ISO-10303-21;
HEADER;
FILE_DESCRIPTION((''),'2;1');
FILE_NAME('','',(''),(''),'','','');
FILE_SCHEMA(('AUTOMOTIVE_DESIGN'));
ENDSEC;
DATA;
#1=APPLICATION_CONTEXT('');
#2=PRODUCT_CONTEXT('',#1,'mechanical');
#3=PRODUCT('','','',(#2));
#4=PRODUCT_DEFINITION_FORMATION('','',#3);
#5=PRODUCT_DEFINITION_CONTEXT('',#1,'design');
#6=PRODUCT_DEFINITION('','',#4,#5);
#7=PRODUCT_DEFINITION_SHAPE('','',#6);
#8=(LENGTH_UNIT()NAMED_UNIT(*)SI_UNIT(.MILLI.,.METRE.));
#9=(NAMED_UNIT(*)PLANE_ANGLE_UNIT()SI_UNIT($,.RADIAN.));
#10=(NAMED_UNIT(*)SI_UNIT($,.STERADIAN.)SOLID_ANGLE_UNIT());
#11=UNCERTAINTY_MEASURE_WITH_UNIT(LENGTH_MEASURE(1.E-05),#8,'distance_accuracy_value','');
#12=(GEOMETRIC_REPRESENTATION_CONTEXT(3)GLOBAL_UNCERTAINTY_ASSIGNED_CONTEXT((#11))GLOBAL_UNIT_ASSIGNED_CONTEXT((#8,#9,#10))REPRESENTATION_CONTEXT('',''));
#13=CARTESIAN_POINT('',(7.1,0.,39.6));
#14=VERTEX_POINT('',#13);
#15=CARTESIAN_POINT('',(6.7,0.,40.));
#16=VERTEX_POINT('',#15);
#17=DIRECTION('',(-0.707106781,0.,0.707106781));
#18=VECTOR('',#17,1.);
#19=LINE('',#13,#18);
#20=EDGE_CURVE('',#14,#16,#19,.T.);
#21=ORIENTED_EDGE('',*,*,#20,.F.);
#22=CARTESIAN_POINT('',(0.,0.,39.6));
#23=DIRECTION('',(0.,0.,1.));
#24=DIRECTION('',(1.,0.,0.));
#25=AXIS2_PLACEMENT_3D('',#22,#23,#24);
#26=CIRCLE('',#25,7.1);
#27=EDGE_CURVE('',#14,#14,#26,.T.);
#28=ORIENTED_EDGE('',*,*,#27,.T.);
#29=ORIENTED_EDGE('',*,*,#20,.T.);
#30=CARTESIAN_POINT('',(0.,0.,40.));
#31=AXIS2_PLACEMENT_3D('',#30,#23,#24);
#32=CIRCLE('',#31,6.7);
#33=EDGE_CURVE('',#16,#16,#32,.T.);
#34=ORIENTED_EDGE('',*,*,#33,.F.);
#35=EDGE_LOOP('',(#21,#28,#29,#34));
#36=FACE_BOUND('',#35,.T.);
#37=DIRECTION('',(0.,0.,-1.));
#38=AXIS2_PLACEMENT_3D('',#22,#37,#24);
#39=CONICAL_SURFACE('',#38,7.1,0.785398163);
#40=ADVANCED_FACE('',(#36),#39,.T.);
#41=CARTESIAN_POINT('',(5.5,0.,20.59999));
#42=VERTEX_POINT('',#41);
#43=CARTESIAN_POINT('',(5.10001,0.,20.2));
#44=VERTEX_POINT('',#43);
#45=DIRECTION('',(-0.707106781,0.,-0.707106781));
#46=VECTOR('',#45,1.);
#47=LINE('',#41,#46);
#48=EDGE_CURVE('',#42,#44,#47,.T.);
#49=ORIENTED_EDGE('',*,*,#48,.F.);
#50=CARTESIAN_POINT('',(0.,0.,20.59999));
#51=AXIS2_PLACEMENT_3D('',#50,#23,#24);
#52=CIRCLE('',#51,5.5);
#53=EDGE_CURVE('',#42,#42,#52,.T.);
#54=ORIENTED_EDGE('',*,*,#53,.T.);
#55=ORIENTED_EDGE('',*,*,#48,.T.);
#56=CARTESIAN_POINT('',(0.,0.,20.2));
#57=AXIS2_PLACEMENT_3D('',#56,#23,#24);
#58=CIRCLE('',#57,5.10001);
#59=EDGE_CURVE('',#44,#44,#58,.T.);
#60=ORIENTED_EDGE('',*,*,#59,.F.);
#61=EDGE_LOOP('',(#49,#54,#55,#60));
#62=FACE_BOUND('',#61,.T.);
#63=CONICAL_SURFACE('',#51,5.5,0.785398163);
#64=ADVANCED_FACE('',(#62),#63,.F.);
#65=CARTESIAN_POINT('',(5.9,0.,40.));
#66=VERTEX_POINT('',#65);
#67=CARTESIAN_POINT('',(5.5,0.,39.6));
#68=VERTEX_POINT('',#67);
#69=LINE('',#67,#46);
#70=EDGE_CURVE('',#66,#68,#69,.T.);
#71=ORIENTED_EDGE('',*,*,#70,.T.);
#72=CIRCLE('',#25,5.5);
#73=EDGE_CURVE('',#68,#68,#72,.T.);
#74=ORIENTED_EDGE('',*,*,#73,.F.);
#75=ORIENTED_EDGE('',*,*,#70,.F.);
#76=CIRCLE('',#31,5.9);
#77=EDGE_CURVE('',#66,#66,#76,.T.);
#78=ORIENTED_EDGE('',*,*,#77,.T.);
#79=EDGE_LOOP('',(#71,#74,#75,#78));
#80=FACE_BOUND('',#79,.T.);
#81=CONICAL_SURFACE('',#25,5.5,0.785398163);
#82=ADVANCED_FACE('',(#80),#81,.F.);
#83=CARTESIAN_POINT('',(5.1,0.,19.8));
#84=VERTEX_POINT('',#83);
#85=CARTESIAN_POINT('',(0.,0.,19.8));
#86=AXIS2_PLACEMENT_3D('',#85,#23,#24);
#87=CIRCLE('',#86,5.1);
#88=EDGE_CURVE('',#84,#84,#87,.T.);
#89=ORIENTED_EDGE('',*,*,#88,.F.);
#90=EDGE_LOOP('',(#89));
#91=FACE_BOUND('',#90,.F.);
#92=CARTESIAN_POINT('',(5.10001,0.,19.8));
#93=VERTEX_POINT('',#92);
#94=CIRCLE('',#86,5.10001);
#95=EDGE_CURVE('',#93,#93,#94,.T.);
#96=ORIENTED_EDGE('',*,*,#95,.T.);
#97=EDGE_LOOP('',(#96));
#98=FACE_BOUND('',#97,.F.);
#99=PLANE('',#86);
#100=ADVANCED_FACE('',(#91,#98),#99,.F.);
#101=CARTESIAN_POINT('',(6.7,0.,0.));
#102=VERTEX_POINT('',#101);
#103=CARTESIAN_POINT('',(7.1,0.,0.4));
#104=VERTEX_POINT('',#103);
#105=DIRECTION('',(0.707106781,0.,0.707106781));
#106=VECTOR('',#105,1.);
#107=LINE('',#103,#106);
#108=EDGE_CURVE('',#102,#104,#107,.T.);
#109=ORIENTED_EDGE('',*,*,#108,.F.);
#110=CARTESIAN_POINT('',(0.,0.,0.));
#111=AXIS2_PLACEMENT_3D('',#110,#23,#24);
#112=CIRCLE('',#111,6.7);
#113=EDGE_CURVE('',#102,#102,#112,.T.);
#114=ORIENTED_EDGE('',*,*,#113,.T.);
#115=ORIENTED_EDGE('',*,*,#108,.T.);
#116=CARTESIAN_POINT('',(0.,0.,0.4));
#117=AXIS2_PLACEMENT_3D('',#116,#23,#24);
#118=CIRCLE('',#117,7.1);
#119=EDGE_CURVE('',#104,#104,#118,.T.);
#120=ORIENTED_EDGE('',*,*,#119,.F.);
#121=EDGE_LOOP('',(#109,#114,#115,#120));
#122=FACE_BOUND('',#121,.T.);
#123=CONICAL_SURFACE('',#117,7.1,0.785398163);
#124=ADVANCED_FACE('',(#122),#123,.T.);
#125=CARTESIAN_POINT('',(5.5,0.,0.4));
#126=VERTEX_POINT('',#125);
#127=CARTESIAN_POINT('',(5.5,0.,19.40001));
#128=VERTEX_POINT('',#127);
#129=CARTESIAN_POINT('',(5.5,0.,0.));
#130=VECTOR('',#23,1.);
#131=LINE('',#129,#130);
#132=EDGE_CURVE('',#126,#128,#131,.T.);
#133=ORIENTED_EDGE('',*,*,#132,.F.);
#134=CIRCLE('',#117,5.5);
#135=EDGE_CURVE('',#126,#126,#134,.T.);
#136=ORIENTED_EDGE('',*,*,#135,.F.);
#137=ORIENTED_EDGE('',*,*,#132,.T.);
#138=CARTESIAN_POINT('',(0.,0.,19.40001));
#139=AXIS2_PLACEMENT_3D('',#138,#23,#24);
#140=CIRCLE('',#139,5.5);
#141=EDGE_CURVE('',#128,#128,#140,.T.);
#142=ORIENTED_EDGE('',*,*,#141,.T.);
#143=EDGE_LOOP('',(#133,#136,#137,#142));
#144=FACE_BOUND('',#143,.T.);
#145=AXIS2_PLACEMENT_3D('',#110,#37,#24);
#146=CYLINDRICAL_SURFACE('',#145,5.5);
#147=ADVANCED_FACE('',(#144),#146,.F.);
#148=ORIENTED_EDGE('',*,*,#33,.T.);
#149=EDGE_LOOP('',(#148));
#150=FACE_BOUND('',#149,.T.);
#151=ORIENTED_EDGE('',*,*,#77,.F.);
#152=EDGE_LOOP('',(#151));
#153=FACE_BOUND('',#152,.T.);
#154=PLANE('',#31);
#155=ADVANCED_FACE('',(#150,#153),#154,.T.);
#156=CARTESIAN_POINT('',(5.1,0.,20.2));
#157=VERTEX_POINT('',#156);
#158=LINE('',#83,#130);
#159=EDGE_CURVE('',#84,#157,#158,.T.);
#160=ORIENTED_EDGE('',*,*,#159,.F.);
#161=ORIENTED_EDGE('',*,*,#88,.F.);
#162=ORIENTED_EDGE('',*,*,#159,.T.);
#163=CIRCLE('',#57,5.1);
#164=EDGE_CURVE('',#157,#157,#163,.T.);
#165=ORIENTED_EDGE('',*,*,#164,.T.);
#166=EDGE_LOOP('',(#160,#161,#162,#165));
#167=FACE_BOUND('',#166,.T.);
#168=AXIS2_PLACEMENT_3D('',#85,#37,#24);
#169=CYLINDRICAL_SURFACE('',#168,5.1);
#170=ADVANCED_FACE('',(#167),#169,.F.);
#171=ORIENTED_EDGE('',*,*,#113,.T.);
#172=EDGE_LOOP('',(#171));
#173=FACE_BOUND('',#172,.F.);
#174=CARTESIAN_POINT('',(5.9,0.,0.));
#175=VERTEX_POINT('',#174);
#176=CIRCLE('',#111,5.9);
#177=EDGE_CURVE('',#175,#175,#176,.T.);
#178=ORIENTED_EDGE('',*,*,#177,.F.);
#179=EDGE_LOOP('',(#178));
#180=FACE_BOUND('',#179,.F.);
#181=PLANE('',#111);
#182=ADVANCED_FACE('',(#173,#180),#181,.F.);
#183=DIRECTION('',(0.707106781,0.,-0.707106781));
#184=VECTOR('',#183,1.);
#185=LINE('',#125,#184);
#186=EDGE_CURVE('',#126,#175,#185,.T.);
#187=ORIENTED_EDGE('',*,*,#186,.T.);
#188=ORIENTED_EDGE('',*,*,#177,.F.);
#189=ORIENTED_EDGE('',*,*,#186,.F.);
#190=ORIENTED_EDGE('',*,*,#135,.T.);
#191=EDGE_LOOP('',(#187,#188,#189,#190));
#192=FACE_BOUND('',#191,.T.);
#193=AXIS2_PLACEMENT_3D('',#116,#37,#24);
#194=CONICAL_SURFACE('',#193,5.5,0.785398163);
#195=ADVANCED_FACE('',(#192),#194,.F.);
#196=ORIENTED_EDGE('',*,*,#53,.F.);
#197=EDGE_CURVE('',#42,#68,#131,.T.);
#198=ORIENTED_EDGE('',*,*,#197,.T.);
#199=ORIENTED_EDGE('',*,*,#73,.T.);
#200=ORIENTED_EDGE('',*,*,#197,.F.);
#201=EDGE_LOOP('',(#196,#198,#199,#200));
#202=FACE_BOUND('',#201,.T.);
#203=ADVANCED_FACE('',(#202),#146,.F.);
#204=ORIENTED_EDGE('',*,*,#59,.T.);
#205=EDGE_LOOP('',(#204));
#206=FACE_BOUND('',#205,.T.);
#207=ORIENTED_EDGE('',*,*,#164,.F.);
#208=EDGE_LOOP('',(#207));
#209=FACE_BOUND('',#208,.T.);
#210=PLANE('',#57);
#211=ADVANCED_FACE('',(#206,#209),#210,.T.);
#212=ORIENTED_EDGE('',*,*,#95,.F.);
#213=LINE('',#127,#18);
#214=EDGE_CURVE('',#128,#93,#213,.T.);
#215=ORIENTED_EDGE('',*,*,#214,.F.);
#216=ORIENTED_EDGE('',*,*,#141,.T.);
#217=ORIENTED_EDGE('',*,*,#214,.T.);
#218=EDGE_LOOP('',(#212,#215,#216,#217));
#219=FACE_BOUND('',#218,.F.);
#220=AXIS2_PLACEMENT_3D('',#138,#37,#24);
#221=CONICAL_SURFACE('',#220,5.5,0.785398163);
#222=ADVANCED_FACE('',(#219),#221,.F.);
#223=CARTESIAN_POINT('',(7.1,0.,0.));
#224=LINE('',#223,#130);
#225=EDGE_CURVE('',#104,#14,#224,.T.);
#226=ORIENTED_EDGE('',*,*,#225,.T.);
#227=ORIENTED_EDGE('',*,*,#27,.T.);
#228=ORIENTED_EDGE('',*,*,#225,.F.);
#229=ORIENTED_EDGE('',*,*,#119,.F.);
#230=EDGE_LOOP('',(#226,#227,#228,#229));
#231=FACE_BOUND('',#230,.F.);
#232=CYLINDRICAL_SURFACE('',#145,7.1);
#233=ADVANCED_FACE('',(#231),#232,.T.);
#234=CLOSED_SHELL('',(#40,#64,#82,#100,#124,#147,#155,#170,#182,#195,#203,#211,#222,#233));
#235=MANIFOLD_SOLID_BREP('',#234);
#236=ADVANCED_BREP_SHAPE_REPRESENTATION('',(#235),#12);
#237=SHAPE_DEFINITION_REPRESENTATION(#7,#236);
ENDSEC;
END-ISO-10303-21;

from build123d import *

# Parameters (mm, degrees)
F0_R     = 7.1
F0_R_2   = 5.5
F1_DEPTH = 40
F2_START = 19.8
F0_R_3   = 5.1
F2_DEPTH = 0.4
F3_SIZE  = 0.39999
F4_SIZE  = 0.4


# Not quite as in the source:
# - a fillet or chamfer is up to 0.001 mm smaller than in the source, because OpenCascade refuses the exact size


with BuildPart() as f1:
    # F0 (on Top) → F1 (new body)
    with BuildSketch(Plane.XY):
        Circle(F0_R)
        Circle(F0_R_2, mode=Mode.SUBTRACT)
    extrude(amount=F1_DEPTH)

    # F0 (on Top) → F2 (join)
    with BuildSketch(Plane.XY.offset(F2_START)):
        Circle(F0_R_2)
        Circle(F0_R_3, mode=Mode.SUBTRACT)
    extrude(amount=F2_DEPTH)

    # F3 (size 0.4 in the source; OpenCascade refuses exactly that, so slightly less here)
    f3_edges = [f1.edges().sort_by_distance(p)[0] for p in [
        (-5.5, 0, 19.8),
        (-5.5, 0, 20.2),
    ]]
    chamfer(f3_edges, length=F3_SIZE)

    # F4
    f4_edges = [f1.edges().sort_by_distance(p)[0] for p in [
        (-5.5, 0, 40),
        (-7.1, 0, 40),
        (-5.5, 0, 0),
        (-7.1, 0, 0),
    ]]
    chamfer(f4_edges, length=F4_SIZE)


solid = f1.part
